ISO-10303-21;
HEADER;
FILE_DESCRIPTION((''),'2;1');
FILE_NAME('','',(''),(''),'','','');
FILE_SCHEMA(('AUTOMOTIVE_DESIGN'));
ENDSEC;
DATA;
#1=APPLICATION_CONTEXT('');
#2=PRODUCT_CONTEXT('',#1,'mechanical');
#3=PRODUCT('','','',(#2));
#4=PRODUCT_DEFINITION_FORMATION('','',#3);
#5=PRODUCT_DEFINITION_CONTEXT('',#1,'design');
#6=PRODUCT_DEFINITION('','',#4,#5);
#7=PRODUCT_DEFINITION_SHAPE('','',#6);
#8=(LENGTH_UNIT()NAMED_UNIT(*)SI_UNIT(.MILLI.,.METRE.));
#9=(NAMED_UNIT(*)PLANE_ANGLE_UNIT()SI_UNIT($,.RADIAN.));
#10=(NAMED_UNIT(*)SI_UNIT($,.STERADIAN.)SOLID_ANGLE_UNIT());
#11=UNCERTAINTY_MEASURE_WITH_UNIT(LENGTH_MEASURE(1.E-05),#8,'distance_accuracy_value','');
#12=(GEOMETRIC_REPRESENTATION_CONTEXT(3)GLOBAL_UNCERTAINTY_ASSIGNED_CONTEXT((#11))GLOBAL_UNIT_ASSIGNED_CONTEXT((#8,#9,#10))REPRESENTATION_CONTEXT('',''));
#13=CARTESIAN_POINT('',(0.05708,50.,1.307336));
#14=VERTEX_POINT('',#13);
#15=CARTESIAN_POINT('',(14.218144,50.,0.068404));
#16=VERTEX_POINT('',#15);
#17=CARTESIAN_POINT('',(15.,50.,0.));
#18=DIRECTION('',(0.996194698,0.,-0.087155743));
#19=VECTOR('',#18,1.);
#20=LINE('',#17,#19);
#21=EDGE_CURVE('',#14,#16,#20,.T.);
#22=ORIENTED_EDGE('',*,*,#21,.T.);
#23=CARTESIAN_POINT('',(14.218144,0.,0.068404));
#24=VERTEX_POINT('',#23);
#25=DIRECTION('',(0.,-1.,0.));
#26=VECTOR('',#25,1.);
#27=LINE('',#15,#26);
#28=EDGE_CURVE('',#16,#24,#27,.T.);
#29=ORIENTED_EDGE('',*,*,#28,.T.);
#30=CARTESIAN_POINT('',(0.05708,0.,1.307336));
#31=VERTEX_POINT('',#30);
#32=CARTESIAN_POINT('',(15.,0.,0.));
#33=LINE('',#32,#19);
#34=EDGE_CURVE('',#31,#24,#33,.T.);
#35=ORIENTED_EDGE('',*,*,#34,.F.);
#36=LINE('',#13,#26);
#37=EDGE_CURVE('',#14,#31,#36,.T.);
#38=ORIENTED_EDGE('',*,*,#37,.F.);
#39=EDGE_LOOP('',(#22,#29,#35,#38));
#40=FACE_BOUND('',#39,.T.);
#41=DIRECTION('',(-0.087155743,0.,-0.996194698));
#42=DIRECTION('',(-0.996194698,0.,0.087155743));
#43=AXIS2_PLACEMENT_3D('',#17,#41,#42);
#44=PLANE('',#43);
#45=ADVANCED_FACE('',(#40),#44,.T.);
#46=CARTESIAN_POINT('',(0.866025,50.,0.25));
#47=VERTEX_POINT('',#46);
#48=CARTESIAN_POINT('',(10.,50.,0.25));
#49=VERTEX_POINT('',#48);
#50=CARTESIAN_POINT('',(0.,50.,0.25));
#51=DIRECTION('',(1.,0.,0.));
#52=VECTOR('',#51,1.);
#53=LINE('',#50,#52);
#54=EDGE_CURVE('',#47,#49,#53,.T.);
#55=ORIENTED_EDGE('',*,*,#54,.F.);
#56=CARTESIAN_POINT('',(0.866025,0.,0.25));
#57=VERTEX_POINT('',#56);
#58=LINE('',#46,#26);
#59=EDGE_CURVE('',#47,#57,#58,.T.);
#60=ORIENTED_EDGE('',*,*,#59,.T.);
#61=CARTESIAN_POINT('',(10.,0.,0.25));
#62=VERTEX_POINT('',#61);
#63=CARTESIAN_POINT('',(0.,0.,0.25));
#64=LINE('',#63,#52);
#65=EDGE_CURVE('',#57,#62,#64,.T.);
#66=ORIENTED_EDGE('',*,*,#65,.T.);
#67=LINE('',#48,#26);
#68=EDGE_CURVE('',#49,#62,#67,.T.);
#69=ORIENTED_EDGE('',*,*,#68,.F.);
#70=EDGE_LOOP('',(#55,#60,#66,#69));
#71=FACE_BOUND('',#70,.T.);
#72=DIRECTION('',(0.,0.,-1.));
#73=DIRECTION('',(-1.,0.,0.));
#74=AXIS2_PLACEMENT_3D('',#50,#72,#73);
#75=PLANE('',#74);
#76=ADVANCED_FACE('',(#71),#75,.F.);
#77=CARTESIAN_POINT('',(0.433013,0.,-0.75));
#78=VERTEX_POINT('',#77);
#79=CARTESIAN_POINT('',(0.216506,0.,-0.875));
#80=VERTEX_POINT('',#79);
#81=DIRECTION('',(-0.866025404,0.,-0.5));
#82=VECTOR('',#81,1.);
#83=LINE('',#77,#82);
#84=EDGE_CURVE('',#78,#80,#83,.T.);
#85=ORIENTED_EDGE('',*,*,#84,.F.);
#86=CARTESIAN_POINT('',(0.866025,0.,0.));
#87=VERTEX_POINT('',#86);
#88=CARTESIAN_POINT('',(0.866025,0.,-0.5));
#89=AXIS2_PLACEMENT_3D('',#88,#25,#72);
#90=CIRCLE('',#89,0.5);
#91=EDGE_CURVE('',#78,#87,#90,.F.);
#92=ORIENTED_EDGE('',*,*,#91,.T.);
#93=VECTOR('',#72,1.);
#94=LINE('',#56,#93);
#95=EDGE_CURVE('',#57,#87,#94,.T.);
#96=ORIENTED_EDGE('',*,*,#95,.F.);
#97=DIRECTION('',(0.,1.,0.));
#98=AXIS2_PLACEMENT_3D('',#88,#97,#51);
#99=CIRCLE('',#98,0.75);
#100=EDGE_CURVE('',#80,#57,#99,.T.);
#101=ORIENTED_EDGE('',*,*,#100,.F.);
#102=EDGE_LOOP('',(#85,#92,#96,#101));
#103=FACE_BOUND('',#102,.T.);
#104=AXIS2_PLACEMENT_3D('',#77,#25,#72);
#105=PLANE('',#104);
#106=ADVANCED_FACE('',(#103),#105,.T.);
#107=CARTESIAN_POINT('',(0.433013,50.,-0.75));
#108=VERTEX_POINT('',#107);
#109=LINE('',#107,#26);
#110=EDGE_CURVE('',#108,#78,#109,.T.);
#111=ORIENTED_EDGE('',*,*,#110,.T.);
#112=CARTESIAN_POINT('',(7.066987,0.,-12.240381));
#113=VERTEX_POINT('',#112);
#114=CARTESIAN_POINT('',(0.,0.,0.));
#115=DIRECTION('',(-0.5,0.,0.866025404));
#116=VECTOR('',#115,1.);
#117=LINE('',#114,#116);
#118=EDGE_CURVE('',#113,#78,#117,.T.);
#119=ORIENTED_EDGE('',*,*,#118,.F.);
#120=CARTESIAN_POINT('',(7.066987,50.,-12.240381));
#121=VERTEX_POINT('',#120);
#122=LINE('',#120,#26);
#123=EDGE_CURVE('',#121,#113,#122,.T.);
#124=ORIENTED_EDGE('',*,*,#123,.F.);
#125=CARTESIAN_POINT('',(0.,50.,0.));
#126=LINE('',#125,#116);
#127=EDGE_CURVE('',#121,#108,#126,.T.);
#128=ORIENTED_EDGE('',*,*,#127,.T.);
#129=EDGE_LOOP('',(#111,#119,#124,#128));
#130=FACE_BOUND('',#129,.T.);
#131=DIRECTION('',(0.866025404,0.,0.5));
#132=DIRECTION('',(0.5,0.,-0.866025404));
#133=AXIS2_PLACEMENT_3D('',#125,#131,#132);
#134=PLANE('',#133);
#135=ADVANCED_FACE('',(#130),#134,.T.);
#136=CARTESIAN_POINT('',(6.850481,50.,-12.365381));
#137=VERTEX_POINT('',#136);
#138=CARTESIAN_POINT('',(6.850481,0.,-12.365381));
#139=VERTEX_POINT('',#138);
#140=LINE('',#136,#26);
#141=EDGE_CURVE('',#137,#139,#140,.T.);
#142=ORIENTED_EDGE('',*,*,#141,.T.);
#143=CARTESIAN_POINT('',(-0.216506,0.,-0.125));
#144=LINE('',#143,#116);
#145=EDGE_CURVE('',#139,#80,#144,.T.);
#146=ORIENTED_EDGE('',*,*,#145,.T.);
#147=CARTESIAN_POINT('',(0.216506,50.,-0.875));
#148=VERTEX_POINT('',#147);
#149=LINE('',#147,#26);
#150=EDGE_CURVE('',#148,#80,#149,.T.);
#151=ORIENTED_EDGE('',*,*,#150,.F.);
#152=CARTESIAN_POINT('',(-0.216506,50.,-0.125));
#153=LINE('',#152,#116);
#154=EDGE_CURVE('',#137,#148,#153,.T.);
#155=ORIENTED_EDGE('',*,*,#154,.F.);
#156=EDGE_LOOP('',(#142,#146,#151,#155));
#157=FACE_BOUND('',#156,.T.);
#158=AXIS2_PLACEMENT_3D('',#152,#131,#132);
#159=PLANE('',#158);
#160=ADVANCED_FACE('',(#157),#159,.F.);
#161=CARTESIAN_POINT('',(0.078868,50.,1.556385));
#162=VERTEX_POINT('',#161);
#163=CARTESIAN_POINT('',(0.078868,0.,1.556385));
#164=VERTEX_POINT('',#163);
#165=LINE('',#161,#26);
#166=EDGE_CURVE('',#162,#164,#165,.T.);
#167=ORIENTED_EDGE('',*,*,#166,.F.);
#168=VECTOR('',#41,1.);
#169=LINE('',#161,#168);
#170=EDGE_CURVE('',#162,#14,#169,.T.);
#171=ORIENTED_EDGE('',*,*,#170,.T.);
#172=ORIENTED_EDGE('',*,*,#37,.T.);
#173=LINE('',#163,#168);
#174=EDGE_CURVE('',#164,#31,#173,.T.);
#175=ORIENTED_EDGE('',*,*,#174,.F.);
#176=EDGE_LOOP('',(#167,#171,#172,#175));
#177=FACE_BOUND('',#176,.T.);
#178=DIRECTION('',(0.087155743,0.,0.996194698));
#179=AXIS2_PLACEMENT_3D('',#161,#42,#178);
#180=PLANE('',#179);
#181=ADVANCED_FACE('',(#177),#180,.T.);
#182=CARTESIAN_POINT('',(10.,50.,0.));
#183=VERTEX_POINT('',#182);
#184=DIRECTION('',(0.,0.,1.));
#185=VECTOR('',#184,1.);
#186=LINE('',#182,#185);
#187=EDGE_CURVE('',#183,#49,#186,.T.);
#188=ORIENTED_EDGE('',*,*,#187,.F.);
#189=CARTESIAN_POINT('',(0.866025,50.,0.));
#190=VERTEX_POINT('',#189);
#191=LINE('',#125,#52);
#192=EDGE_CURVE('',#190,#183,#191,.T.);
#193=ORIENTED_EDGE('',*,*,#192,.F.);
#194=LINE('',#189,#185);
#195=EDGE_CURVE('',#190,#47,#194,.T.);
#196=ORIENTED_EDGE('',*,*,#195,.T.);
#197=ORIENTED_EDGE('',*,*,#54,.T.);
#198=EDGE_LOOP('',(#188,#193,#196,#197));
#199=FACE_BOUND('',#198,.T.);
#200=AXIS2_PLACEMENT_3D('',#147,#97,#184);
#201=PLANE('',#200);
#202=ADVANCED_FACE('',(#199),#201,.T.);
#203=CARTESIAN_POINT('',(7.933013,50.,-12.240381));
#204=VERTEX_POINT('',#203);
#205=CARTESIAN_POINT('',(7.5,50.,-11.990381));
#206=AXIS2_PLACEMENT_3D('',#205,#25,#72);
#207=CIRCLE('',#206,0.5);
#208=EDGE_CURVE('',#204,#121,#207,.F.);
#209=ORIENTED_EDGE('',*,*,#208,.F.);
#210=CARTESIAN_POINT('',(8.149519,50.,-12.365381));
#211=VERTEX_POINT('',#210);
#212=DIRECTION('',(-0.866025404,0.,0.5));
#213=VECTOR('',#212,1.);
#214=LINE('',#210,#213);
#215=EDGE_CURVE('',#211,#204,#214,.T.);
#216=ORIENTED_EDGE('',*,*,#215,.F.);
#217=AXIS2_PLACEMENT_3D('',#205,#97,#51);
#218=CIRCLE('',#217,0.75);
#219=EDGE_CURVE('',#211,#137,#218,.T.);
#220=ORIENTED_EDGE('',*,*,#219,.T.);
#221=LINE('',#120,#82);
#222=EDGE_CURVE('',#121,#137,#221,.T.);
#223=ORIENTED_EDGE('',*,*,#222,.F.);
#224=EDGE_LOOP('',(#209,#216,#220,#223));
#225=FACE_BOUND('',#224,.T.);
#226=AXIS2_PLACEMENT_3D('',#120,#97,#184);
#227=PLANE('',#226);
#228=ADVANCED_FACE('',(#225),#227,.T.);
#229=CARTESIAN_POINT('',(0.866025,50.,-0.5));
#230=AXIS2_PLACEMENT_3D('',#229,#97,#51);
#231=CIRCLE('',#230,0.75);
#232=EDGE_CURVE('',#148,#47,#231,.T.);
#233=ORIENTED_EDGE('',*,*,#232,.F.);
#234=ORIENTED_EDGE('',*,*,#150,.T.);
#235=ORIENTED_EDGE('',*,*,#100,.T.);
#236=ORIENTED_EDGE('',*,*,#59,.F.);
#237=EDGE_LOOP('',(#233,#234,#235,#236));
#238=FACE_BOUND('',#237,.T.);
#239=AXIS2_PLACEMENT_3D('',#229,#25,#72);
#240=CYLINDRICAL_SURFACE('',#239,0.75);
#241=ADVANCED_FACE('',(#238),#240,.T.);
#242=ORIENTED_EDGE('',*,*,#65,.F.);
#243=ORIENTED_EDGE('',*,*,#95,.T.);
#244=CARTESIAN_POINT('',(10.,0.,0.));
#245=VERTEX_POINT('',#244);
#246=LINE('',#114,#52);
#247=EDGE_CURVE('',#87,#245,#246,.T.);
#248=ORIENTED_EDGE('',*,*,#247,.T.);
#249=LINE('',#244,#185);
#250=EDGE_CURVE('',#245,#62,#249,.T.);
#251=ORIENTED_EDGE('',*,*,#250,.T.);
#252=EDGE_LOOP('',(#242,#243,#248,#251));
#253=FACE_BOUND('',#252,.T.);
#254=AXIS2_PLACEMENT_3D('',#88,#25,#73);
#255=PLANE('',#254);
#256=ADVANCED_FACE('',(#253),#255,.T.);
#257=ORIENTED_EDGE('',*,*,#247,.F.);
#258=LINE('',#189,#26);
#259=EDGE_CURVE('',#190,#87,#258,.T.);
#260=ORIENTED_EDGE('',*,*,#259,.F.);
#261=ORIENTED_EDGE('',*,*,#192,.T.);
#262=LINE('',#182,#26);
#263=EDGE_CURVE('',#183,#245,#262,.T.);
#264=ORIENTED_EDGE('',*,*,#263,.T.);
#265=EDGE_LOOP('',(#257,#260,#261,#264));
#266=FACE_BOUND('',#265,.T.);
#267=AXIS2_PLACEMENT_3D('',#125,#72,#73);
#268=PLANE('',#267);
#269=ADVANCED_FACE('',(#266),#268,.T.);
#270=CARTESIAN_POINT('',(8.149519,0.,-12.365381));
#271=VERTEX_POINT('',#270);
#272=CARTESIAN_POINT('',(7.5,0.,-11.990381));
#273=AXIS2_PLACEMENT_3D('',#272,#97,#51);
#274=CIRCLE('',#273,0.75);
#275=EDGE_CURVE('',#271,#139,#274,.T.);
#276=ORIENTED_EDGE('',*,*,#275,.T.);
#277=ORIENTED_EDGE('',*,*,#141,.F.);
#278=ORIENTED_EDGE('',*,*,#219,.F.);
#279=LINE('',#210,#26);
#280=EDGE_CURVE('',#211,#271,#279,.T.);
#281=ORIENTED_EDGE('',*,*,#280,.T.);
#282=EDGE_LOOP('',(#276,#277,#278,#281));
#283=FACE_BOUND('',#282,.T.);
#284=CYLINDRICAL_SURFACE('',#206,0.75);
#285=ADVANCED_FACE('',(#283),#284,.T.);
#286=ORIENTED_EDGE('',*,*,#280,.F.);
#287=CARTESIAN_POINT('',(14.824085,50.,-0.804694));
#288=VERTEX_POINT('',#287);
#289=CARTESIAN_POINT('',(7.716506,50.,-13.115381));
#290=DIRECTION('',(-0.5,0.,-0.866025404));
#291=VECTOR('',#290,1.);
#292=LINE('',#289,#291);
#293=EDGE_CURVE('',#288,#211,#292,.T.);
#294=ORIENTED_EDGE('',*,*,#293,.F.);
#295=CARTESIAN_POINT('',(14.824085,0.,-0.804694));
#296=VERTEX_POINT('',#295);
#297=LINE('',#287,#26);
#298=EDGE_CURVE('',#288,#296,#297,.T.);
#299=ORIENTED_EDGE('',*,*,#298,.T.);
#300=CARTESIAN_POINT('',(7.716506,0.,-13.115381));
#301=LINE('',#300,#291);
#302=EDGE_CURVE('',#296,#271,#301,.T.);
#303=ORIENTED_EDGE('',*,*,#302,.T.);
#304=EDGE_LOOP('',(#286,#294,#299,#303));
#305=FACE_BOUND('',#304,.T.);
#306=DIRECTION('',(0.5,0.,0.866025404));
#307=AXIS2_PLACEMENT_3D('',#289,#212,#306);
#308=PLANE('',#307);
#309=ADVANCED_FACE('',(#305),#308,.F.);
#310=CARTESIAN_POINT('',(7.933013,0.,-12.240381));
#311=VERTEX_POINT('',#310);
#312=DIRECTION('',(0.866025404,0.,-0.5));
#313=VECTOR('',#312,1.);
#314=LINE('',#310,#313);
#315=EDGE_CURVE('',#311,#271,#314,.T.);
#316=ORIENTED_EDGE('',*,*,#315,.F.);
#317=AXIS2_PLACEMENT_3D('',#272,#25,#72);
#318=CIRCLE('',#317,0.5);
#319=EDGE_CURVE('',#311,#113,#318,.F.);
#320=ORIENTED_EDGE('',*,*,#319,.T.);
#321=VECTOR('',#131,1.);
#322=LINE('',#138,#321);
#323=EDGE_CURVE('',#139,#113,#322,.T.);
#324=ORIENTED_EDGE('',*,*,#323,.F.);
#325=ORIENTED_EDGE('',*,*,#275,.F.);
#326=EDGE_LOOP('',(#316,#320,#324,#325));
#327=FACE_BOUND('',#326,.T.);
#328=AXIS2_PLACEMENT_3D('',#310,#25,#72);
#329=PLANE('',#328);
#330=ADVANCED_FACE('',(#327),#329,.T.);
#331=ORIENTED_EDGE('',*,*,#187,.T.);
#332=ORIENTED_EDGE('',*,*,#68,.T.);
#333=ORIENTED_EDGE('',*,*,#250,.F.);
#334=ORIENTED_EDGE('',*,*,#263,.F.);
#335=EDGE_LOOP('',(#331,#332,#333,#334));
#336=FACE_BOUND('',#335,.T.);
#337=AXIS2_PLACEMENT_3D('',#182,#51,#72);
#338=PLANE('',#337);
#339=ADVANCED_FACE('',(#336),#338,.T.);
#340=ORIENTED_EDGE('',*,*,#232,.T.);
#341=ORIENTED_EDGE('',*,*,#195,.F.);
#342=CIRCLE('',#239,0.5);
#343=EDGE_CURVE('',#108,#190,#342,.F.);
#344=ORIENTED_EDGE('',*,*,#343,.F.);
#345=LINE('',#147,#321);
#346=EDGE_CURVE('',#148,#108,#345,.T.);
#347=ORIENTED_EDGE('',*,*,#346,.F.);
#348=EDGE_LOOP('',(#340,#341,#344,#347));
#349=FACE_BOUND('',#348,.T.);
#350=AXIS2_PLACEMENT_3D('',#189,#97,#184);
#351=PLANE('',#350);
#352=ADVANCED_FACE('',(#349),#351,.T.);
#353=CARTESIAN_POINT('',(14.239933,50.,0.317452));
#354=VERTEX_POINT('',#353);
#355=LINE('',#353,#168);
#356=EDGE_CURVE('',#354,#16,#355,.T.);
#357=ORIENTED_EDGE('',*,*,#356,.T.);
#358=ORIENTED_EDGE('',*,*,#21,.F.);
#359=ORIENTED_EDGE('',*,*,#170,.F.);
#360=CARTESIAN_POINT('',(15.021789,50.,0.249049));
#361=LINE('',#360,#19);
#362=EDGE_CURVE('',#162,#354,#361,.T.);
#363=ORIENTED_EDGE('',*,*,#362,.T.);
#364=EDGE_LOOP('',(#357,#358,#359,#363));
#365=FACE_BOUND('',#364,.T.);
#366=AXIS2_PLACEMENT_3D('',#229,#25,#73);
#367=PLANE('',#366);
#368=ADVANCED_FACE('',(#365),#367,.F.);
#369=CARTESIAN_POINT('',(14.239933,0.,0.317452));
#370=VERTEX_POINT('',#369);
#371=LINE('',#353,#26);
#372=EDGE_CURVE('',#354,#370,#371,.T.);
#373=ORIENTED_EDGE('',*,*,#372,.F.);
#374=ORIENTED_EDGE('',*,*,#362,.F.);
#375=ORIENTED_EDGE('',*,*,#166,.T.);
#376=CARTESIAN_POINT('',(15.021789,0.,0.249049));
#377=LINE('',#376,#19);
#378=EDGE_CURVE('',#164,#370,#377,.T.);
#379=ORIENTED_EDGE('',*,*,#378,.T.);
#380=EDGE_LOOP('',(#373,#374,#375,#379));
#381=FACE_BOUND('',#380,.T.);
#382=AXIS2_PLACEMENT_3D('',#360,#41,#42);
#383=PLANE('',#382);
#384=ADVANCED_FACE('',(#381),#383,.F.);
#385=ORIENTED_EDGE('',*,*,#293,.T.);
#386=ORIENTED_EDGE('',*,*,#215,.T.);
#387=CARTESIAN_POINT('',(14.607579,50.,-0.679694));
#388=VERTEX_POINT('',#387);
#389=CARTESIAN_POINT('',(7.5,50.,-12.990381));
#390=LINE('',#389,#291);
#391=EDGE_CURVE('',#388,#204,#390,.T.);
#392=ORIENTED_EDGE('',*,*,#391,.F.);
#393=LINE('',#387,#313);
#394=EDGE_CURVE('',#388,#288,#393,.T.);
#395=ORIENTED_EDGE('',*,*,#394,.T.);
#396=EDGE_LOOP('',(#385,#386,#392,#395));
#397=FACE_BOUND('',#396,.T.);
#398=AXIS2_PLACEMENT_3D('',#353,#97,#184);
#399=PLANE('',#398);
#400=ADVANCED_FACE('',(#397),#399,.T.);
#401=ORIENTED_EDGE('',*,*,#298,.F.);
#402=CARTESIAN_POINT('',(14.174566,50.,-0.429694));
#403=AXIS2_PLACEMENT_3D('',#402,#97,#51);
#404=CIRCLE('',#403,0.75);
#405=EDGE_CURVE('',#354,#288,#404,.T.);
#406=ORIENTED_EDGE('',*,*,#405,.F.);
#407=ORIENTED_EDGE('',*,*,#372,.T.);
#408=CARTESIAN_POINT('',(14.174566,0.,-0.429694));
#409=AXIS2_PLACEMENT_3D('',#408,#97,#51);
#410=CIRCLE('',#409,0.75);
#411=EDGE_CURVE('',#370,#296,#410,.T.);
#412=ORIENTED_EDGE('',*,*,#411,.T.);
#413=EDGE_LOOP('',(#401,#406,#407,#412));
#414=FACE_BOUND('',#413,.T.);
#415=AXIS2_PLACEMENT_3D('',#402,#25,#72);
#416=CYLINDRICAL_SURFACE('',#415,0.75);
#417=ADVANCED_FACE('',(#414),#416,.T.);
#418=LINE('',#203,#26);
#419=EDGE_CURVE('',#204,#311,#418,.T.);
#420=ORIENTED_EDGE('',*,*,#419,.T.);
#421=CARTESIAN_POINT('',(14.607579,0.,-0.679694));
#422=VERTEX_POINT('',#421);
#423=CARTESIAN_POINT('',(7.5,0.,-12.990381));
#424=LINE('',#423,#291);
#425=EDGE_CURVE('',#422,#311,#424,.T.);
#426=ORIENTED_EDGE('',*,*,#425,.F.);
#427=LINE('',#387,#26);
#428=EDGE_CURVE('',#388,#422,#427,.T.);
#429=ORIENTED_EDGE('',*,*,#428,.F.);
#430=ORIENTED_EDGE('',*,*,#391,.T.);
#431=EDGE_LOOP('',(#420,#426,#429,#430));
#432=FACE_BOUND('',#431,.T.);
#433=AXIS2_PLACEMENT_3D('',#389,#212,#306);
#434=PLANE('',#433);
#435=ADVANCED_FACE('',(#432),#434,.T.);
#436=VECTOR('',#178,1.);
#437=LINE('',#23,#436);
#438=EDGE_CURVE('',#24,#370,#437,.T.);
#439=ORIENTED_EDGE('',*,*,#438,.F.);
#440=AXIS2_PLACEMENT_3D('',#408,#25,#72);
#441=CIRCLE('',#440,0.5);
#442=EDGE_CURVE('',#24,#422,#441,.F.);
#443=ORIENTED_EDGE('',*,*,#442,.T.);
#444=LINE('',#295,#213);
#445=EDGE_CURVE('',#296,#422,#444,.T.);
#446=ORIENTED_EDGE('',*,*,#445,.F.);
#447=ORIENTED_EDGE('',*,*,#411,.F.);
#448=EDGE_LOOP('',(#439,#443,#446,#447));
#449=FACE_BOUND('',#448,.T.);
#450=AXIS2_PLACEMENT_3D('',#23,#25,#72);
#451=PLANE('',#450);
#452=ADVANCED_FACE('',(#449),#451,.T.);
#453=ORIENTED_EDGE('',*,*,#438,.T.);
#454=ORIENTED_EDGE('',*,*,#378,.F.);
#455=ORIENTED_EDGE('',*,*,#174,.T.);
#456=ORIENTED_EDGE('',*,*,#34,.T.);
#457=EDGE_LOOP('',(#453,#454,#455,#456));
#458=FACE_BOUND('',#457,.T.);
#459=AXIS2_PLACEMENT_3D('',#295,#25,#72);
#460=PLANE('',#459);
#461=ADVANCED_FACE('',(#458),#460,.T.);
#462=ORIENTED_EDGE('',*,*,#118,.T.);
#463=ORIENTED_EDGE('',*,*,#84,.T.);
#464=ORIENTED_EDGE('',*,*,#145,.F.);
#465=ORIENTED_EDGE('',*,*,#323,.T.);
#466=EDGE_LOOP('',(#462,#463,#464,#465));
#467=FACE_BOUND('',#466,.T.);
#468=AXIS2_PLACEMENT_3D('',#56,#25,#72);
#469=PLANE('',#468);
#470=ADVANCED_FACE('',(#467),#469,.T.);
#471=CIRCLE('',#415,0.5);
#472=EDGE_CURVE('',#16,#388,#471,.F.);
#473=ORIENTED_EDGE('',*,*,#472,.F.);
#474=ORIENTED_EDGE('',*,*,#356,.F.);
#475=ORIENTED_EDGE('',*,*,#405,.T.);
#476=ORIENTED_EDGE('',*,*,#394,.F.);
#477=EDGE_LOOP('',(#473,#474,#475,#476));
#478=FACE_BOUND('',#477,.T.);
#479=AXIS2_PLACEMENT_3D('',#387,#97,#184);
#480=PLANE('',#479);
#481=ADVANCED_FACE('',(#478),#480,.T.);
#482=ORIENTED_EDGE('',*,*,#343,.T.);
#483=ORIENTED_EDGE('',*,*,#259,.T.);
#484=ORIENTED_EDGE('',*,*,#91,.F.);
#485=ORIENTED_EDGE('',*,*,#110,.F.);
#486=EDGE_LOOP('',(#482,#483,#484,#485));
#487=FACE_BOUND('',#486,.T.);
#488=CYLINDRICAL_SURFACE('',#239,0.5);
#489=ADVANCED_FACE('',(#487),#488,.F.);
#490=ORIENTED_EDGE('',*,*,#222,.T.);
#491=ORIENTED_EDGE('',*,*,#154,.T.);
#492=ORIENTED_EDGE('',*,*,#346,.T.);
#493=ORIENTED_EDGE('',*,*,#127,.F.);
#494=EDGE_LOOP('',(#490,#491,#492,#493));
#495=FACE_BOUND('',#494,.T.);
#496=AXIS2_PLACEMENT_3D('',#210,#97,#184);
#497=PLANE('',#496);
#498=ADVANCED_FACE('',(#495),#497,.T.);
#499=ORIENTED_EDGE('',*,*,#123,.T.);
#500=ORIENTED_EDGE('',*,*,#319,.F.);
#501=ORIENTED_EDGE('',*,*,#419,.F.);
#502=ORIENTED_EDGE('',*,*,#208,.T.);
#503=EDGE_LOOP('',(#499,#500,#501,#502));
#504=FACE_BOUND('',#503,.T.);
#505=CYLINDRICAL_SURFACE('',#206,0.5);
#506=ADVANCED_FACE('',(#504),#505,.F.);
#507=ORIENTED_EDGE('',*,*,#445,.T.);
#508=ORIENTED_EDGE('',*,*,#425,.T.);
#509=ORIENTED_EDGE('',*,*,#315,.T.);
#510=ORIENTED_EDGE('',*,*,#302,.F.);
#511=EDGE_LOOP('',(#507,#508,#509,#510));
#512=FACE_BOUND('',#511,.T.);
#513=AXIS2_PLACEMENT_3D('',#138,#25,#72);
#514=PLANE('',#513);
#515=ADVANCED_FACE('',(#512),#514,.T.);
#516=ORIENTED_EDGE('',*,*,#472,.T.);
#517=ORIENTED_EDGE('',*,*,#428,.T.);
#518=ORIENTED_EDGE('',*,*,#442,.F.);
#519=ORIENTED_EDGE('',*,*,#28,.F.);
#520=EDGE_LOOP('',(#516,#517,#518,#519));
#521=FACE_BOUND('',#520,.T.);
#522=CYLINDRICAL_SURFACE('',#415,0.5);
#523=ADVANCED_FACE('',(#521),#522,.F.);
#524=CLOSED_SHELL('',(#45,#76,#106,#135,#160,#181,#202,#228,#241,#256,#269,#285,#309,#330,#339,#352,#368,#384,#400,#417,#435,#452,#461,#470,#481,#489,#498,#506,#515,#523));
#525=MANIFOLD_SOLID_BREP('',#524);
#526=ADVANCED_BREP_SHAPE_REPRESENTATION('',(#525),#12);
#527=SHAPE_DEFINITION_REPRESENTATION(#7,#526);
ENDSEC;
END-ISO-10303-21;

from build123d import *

# Parameters (mm, degrees)
BASE_FLANGE2_DEPTH = 50


# Sheet-metal steps are written as plain solids
with BuildPart() as part:
    # Sketch1 → Base-Flange2 (new body)
    with BuildSketch(Plane(origin=(0, 0, 0), x_dir=(1, 0, 0), z_dir=(0, 1, 0))):
        with BuildLine():
            Line((10, 0), (0.866025404, 0))
            ThreePointArc((0.866025404, 0), (0.433012702, 0.25), (0.433012702, 0.75))
            Line((0.433012702, 0.75), (7.066987298, 12.240381057))
            ThreePointArc((7.066987298, 12.240381057), (7.5, 12.490381057), (7.933012702, 12.240381057))
            Line((7.933012702, 12.240381057), (14.607578606, 0.679693793))
            ThreePointArc((14.607578606, 0.679693793), (14.61807132, 0.198819486), (14.218143775, -0.068403556))
            Line((14.218143775, -0.068403556), (0.057079529, -1.307336141))
            Line((0.057079529, -1.307336141), (0.078868464, -1.556384816))
            Line((0.078868464, -1.556384816), (14.239932711, -0.317452231))
            ThreePointArc((14.239932711, -0.317452231), (14.839824029, 0.083382333), (14.824084957, 0.804693793))
            Line((14.824084957, 0.804693793), (8.149519053, 12.365381057))
            ThreePointArc((8.149519053, 12.365381057), (7.5, 12.740381057), (6.850480947, 12.365381057))
            Line((6.850480947, 12.365381057), (0.216506351, 0.875))
            ThreePointArc((0.216506351, 0.875), (0.216506351, 0.125), (0.866025404, -0.25))
            Line((0.866025404, -0.25), (10, -0.25))
            Line((10, -0.25), (10, 0))
        make_face()
    extrude(amount=BASE_FLANGE2_DEPTH)


solid = part.part
